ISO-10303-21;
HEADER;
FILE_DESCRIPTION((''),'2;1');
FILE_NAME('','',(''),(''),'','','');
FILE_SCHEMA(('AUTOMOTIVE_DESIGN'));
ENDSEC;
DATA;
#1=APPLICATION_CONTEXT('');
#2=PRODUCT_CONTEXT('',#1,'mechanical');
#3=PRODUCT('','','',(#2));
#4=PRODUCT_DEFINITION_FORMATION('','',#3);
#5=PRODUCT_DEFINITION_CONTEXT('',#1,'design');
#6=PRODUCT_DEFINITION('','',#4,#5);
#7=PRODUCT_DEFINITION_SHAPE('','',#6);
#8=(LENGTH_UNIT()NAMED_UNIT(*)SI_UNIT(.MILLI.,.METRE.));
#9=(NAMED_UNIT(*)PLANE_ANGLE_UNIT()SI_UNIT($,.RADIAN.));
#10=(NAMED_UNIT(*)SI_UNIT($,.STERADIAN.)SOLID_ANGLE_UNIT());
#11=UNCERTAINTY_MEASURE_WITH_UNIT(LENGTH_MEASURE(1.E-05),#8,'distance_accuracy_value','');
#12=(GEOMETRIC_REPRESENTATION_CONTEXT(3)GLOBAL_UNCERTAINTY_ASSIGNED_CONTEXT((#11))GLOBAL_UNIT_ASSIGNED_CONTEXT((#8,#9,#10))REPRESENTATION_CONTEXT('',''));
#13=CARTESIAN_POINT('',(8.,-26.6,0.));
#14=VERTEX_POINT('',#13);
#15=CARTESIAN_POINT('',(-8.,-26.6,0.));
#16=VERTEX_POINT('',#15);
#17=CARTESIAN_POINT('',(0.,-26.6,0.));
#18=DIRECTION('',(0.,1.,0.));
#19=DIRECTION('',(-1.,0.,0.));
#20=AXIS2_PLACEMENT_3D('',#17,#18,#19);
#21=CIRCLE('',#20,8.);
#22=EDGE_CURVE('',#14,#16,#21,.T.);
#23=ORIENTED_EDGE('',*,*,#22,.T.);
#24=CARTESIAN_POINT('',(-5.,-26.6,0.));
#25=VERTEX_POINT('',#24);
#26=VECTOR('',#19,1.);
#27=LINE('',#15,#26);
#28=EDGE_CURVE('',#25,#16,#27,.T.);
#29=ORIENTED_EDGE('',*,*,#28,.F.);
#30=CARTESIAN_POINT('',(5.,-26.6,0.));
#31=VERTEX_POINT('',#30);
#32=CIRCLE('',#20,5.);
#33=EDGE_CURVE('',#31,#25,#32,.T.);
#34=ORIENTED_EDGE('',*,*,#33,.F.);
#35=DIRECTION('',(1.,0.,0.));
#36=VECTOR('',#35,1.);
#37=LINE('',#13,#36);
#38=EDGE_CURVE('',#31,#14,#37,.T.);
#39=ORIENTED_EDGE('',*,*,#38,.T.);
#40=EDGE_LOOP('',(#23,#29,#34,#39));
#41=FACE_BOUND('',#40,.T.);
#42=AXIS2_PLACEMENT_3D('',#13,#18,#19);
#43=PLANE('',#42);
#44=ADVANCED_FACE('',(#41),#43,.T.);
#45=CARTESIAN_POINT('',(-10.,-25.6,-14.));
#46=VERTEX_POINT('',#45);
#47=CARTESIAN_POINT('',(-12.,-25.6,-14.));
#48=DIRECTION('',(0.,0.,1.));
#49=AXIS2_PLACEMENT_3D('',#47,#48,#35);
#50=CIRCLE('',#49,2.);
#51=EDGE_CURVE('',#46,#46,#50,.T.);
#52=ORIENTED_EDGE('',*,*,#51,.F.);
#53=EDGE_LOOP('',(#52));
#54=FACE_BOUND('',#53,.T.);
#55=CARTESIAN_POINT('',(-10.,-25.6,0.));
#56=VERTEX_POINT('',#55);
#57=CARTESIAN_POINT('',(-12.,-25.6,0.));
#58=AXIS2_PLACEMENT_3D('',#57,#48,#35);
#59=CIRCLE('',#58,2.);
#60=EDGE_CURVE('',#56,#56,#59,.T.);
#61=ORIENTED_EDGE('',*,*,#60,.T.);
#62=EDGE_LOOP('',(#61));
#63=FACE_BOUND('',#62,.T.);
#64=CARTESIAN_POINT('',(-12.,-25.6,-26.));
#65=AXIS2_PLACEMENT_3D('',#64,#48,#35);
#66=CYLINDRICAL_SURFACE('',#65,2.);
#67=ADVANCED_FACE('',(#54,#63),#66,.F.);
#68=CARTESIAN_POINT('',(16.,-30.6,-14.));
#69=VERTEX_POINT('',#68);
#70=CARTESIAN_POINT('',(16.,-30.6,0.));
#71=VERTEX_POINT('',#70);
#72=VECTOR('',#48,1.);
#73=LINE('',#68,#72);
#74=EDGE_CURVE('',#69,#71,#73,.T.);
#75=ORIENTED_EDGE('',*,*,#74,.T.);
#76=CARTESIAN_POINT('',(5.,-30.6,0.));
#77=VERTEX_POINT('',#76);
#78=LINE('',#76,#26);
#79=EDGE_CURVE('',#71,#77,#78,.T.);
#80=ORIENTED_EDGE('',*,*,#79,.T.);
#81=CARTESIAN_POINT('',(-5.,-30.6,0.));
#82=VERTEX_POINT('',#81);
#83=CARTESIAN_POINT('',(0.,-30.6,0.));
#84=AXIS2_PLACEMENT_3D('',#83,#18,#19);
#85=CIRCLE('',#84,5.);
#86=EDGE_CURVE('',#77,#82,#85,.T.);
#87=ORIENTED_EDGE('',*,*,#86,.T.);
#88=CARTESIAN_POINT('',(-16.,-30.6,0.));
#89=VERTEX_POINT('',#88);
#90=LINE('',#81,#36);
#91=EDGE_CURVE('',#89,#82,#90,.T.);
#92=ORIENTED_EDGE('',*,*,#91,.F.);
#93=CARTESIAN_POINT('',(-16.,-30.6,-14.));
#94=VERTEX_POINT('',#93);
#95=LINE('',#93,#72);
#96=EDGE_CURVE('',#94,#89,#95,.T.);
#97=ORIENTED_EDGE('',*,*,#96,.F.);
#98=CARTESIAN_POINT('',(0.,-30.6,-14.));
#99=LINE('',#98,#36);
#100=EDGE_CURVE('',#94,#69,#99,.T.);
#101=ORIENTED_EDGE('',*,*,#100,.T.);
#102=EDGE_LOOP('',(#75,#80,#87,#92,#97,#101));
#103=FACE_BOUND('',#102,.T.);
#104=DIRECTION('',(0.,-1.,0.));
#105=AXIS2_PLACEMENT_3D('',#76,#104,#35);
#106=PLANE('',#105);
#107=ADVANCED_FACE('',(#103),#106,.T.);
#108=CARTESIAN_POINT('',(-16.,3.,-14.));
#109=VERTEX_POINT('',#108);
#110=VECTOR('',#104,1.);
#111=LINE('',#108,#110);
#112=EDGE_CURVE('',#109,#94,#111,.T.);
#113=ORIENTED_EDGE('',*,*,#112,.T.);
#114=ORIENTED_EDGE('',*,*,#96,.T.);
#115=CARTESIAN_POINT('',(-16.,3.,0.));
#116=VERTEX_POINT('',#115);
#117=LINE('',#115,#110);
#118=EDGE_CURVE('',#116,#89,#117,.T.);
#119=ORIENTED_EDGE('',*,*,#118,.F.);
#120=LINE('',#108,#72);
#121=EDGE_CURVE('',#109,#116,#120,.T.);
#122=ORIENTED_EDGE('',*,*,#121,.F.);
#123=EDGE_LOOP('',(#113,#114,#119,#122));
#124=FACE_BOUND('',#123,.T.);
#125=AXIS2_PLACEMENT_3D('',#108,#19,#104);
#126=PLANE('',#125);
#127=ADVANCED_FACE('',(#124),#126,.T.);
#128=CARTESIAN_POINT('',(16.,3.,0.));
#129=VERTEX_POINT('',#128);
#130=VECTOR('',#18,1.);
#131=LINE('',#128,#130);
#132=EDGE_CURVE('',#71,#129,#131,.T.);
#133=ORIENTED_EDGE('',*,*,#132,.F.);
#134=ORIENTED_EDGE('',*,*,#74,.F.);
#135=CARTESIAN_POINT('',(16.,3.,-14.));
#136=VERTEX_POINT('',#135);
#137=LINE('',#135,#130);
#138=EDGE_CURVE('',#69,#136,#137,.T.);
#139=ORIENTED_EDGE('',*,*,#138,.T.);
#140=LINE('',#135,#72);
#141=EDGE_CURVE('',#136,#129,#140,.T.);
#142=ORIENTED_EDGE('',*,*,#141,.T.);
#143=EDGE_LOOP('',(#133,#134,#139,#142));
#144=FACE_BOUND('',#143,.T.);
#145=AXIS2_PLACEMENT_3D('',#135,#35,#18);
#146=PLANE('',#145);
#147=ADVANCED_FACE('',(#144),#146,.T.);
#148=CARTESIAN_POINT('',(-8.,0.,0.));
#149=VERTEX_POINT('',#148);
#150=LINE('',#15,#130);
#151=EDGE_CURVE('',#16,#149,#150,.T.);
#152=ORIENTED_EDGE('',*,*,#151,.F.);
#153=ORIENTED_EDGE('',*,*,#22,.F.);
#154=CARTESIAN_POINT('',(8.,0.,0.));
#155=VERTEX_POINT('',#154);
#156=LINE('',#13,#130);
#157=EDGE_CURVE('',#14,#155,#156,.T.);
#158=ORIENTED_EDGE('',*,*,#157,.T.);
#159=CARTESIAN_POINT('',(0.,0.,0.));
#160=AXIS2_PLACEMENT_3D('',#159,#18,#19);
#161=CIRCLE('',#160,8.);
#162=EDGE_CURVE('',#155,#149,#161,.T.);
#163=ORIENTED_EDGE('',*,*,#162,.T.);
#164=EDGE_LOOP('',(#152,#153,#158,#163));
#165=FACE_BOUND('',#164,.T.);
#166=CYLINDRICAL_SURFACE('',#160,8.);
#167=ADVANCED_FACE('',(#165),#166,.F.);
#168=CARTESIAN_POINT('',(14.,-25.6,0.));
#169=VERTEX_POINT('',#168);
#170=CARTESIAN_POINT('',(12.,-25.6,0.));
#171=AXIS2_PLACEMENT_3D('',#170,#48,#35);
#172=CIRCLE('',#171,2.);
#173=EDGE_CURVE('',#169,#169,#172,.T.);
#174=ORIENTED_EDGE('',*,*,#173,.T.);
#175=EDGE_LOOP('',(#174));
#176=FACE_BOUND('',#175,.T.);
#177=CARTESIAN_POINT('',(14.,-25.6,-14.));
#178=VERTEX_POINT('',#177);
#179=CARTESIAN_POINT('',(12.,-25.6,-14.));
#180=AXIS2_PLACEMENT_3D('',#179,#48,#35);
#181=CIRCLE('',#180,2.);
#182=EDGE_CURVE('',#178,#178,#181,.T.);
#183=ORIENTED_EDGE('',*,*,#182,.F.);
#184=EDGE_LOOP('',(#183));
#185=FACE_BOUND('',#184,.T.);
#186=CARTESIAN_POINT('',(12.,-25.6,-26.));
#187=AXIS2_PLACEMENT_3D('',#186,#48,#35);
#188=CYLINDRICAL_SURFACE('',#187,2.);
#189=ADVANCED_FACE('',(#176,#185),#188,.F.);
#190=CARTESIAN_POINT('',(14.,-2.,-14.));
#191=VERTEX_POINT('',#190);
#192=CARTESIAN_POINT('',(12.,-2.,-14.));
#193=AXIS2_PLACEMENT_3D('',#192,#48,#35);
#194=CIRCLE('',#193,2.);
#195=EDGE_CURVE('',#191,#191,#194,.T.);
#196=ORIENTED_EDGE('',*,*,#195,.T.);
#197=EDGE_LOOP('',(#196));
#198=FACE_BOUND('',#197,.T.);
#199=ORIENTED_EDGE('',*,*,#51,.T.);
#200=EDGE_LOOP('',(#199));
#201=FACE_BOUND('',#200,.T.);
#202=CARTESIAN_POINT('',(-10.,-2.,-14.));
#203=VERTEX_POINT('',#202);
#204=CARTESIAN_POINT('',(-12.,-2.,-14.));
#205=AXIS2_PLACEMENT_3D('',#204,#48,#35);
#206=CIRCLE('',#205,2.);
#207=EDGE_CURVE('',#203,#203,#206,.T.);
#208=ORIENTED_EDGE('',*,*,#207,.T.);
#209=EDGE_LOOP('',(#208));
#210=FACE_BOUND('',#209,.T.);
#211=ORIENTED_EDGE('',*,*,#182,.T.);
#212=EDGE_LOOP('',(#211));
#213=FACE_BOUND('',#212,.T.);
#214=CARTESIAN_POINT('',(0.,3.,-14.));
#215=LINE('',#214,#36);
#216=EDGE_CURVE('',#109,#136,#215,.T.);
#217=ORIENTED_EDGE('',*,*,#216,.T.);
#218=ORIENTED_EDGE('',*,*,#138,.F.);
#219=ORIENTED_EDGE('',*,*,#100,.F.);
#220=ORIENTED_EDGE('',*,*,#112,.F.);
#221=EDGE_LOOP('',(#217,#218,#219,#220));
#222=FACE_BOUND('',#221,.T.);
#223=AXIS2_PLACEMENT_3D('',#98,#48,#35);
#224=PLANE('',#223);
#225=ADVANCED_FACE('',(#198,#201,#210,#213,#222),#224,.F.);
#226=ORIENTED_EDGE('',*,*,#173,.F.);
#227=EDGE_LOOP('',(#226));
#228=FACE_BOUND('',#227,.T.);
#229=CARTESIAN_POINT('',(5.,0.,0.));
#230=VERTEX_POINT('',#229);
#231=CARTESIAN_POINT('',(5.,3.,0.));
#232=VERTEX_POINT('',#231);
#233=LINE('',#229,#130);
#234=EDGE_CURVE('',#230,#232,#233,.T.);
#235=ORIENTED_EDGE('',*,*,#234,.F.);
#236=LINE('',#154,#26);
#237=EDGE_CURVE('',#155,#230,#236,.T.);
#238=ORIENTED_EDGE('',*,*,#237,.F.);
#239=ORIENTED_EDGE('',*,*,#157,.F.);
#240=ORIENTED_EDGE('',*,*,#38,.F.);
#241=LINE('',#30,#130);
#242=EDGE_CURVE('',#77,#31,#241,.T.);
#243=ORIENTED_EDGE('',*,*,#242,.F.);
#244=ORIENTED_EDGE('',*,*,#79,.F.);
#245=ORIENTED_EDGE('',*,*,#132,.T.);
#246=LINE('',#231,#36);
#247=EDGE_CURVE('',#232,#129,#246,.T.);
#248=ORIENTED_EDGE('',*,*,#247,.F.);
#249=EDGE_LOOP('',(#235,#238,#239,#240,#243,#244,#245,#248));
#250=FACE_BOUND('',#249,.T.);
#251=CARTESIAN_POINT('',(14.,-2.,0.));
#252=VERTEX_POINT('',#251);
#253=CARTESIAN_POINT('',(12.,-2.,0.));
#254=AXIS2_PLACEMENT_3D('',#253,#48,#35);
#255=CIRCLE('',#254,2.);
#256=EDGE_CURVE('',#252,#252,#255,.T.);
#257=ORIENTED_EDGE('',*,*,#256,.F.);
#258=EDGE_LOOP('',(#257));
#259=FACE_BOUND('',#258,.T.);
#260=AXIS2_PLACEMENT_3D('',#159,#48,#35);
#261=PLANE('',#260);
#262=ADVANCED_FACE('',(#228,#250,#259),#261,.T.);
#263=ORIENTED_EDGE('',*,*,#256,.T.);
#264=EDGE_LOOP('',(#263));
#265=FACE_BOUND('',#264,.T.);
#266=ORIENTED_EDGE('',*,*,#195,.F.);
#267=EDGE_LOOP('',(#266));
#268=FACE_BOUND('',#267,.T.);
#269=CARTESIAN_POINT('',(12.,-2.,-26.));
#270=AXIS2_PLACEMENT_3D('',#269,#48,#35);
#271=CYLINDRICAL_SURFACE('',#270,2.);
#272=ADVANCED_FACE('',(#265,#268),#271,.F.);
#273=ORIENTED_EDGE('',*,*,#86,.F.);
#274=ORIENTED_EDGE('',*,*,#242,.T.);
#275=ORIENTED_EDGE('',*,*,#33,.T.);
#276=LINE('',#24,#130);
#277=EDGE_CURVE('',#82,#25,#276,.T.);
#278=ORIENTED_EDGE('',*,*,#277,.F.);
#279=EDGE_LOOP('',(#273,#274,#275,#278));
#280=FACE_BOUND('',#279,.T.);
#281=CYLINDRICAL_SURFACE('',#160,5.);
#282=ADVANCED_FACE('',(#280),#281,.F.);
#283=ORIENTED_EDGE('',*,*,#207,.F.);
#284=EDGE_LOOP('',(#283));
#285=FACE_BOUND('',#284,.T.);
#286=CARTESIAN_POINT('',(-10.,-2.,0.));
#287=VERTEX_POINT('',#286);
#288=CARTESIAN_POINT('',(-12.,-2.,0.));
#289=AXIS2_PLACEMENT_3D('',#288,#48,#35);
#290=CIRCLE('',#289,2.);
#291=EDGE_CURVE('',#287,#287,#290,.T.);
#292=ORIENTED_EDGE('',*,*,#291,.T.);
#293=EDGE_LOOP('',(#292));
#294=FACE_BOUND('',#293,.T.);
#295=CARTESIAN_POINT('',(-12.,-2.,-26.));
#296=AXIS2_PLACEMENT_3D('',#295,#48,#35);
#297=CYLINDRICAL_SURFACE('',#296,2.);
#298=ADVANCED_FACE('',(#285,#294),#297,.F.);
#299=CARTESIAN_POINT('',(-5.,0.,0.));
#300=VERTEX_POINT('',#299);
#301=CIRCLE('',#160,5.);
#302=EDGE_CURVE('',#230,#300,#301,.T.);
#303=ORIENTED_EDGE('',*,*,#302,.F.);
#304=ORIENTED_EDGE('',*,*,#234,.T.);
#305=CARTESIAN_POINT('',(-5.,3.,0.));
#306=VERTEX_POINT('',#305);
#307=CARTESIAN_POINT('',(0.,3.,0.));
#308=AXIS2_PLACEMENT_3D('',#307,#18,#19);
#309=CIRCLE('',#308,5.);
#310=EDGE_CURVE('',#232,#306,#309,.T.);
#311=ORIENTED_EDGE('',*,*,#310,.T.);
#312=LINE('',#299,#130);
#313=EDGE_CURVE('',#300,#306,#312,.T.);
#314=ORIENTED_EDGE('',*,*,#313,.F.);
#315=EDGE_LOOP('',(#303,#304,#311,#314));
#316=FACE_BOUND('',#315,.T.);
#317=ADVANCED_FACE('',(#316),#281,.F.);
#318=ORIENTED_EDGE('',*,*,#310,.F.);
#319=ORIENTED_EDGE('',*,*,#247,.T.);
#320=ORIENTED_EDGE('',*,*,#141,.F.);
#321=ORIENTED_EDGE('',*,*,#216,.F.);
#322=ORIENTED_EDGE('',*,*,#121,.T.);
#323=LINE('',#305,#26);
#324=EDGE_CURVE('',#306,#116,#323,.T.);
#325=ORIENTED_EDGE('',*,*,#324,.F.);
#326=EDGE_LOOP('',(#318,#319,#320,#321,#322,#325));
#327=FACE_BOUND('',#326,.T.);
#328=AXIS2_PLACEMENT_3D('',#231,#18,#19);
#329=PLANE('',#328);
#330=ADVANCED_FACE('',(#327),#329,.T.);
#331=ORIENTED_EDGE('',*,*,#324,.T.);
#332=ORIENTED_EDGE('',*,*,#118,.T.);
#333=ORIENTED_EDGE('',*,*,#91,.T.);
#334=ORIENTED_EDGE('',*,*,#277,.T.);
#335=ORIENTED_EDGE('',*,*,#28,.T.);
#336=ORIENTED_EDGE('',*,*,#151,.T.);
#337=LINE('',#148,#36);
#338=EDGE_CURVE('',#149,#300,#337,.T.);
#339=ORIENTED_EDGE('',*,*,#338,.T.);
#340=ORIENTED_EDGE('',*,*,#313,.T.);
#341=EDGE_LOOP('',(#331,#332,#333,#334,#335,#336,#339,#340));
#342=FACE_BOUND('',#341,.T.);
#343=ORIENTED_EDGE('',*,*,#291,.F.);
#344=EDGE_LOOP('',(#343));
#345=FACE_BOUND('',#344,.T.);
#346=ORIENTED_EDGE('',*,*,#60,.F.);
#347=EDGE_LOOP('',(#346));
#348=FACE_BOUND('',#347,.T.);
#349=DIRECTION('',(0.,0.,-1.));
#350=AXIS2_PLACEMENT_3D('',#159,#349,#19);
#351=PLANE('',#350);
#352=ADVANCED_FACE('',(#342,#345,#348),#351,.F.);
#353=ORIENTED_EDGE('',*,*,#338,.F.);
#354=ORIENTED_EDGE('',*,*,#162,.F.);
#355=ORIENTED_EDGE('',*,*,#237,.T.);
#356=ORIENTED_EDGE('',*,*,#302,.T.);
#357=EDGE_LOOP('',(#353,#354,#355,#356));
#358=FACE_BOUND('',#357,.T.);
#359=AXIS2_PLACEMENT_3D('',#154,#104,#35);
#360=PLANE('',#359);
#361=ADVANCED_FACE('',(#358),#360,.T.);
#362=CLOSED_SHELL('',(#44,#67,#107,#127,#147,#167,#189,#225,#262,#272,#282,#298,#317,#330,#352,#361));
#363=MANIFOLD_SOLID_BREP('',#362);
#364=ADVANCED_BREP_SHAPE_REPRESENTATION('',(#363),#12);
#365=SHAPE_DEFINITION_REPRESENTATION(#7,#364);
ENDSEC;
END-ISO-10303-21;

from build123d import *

# Parameters (mm, degrees)
REVOLUCI_N1_ANGLE         = 180
CROQUIS2_W                = 8
CROQUIS2_H                = 33.6
SALIENTE_EXTRUIR1_DEPTH   = 14
SALIENTE_EXTRUIR1_2_DEPTH = 14
SALIENTE_EXTRUIR2_START   = -33.6
SALIENTE_EXTRUIR2_DEPTH   = 33.6
CROQUIS4_R                = 2
CORTAR_EXTRUIR1_DEPTH     = 26


# Read off the part's stored shape, not the designer's step: Saliente-Extruir2
with BuildPart() as part:
    # Croquis1 → Revolución1 (revolve)
    with BuildSketch(Plane.XY):
        Polygon((-8, 0), (-5, 0), (-5, 3), (-14, 3), (-14, -30.6), (-5, -30.6), (-5, -26.6), (-8, -26.6), align=None)
    revolve(axis=Axis((0, 0, 0), (0, -1, 0)), revolution_arc=REVOLUCI_N1_ANGLE)



with BuildPart() as body_2:
    # Croquis2 → Saliente-Extruir1 (new body)
    with BuildSketch(Plane.XY):
        with Locations((-12, -13.8)):
            Rectangle(CROQUIS2_W, CROQUIS2_H)
    extrude(amount=-SALIENTE_EXTRUIR1_DEPTH)


with BuildPart() as body_3:
    # Croquis2 → Saliente-Extruir1 2 (new body)
    with BuildSketch(Plane.XY):
        with Locations((12, -13.8)):
            Rectangle(CROQUIS2_W, CROQUIS2_H)
    extrude(amount=-SALIENTE_EXTRUIR1_2_DEPTH)


with BuildPart() as part_1:
    add(part.part)

    add(body_2.part)  # Saliente-Extruir2 merges body 2

    add(body_3.part)  # Saliente-Extruir2 merges body 3
    # Saliente-Extruir2 outline → Saliente-Extruir2 (add)
    with BuildSketch(Plane(origin=(0, 3, 0), x_dir=(1, 0, 0), z_dir=(0, 1, 0)).offset(SALIENTE_EXTRUIR2_START)):
        with BuildLine():
            Line((8, 14), (0, 14))
            ThreePointArc((0, 14), (4.192388692, 13.357540082), (8, 11.489125293))
            Line((8, 11.489125293), (8, 14))
        make_face()
        with BuildLine():
            Line((0, 14), (-8, 14))
            Line((-8, 14), (-8, 11.489125293))
            ThreePointArc((-8, 11.489125293), (-4.192388692, 13.357540082), (0, 14))
        make_face()
    extrude(amount=SALIENTE_EXTRUIR2_DEPTH)

    # Croquis4 → Cortar-Extruir1 (cut)
    with BuildSketch(Plane.XY):
        with Locations((-12, -2)):
            Circle(CROQUIS4_R)
        with Locations((12, -2)):
            Circle(CROQUIS4_R)
        with Locations((-12, -25.6)):
            Circle(CROQUIS4_R)
        with Locations((12, -25.6)):
            Circle(CROQUIS4_R)
    extrude(amount=-CORTAR_EXTRUIR1_DEPTH, mode=Mode.SUBTRACT)


solid = part_1.part
